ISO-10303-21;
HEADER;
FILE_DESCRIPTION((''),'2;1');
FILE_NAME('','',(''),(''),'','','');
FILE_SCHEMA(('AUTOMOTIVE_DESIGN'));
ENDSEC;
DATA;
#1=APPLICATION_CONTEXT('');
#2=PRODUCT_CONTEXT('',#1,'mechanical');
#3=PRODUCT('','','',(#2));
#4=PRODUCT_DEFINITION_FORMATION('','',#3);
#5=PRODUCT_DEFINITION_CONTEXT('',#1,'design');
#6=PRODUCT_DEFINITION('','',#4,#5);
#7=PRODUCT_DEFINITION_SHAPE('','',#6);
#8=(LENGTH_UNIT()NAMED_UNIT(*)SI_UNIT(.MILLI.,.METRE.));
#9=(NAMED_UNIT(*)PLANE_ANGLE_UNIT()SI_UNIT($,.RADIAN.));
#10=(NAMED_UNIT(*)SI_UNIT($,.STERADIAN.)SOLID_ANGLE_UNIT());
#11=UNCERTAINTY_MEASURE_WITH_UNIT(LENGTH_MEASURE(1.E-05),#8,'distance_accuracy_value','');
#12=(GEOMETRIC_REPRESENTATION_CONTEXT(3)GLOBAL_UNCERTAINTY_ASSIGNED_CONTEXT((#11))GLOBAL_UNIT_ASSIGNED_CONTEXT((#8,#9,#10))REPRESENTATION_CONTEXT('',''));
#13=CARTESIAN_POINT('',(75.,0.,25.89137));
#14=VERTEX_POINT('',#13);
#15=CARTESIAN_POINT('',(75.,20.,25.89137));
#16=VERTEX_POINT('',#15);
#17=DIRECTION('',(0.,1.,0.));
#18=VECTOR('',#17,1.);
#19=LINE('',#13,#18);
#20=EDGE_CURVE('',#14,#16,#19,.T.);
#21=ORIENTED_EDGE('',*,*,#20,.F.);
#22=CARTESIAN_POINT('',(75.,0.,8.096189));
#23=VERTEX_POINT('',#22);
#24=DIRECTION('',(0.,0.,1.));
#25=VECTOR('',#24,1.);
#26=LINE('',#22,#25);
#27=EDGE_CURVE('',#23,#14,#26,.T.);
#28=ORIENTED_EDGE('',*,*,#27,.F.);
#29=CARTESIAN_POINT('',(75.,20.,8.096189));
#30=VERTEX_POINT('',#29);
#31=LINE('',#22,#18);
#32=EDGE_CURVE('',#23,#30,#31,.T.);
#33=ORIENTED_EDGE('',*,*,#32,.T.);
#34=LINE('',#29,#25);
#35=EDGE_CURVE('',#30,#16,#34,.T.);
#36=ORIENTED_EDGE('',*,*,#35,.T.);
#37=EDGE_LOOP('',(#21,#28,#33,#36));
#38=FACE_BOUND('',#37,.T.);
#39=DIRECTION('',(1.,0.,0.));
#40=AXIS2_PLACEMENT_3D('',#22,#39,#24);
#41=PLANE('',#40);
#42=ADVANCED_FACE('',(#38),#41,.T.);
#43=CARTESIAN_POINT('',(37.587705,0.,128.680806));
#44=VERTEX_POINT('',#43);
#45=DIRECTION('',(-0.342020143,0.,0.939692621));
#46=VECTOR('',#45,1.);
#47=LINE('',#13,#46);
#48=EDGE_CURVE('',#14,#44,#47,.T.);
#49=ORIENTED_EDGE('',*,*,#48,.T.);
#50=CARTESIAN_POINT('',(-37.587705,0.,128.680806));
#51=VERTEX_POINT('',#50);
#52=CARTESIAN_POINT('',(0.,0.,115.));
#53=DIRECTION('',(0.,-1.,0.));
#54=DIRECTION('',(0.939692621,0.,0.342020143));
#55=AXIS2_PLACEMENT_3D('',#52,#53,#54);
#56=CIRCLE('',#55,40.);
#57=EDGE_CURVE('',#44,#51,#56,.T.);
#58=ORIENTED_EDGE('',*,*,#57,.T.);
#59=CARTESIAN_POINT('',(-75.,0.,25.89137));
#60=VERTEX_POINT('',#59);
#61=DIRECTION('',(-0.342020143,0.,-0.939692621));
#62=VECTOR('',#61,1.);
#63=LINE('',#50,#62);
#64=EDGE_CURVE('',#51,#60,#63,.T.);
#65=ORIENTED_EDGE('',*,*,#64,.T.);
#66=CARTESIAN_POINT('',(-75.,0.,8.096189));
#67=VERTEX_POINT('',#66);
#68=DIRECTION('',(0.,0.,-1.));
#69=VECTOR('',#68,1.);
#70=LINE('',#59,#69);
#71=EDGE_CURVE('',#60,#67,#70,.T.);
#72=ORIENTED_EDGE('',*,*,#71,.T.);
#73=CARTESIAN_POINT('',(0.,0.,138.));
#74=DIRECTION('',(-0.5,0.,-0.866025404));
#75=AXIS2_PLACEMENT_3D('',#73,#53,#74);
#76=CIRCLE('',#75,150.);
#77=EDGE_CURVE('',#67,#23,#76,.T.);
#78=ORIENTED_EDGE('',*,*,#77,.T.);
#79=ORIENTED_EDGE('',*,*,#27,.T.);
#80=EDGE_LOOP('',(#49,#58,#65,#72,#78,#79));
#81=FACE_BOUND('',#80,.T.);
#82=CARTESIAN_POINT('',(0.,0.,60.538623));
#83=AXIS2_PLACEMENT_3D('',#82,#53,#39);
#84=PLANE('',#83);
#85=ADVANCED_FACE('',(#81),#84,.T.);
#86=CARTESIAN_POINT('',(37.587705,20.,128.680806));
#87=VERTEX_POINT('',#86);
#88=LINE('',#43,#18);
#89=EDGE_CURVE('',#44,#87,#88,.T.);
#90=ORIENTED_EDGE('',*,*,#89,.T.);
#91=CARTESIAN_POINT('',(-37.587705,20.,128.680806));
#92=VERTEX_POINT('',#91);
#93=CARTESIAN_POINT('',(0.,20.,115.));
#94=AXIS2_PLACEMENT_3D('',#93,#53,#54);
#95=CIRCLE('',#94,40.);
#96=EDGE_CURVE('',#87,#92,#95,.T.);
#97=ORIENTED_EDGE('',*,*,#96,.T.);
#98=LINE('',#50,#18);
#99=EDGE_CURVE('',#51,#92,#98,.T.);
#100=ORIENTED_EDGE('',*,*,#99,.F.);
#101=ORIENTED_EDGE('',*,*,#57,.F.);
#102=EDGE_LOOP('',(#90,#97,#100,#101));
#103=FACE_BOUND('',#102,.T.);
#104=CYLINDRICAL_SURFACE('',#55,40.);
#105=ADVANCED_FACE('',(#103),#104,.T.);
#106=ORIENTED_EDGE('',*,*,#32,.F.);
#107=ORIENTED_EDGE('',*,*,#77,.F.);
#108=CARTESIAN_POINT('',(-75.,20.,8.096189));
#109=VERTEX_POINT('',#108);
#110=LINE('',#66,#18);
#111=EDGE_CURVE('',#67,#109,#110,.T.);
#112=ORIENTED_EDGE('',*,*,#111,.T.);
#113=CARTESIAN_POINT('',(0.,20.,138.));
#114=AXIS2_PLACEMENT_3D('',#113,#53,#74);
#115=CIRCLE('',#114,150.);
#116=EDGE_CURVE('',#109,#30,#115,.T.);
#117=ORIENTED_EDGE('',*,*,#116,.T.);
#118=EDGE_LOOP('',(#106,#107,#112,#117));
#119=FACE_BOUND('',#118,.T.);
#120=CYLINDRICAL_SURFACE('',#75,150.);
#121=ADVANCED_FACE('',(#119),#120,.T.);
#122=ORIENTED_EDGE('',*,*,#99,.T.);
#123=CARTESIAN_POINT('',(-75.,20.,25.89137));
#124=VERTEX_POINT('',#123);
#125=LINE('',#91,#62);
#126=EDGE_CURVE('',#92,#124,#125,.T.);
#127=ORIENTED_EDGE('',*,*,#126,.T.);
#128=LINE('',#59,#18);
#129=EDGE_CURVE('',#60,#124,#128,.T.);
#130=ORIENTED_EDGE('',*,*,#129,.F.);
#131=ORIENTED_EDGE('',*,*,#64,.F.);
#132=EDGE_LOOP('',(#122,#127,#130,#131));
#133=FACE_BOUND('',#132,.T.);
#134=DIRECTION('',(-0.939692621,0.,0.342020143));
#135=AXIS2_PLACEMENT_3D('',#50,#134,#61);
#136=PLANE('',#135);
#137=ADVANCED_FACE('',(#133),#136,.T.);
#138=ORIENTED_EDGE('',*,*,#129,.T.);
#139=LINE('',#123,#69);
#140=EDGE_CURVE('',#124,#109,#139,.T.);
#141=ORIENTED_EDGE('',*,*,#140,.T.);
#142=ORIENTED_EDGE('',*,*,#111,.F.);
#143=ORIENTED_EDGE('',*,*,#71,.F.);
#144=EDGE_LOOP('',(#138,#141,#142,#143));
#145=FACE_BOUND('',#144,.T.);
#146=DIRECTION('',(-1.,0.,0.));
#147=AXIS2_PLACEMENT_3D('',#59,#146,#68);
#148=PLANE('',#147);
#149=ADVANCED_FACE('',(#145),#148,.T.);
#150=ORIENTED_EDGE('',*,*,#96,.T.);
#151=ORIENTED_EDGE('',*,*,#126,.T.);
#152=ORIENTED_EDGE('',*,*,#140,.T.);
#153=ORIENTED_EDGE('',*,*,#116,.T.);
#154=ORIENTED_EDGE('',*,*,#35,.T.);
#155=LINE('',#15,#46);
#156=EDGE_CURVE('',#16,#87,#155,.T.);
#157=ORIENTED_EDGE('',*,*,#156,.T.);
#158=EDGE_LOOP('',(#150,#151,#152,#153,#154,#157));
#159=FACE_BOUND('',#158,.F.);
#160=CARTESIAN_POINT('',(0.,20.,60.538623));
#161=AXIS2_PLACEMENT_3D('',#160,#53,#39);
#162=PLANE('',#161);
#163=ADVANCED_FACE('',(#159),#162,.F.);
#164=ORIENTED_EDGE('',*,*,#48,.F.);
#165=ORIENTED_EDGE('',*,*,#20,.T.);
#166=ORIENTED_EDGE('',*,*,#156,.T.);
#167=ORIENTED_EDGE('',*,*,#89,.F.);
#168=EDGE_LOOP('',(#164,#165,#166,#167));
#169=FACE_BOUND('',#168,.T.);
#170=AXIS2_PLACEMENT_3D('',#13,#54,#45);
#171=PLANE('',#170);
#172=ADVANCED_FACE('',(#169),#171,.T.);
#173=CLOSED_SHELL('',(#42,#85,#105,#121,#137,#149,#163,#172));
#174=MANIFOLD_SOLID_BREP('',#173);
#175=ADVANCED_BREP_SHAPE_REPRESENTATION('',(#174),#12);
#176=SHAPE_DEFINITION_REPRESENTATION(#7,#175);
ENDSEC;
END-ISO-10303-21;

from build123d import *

# Parameters (mm, degrees)
F2_DEPTH = 20


with BuildPart() as f2:
    # F1 (on Front) → F2 (new body)
    with BuildSketch(Plane.XZ):
        with BuildLine():
            ThreePointArc((37.5877048314, 128.680805733), (0, 155), (-37.5877048314, 128.680805733))
            Line((-37.5877048314, 128.680805733), (-75, 25.8913695474))
            Line((-75, 25.8913695474), (-75, 8.0961894323))
            ThreePointArc((-75, 8.0961894323), (0, -12), (75, 8.0961894323))
            Line((75, 8.0961894323), (75, 25.8913695474))
            Line((75, 25.8913695474), (37.5877048314, 128.680805733))
        make_face()
    extrude(amount=-F2_DEPTH)


solid = f2.part
